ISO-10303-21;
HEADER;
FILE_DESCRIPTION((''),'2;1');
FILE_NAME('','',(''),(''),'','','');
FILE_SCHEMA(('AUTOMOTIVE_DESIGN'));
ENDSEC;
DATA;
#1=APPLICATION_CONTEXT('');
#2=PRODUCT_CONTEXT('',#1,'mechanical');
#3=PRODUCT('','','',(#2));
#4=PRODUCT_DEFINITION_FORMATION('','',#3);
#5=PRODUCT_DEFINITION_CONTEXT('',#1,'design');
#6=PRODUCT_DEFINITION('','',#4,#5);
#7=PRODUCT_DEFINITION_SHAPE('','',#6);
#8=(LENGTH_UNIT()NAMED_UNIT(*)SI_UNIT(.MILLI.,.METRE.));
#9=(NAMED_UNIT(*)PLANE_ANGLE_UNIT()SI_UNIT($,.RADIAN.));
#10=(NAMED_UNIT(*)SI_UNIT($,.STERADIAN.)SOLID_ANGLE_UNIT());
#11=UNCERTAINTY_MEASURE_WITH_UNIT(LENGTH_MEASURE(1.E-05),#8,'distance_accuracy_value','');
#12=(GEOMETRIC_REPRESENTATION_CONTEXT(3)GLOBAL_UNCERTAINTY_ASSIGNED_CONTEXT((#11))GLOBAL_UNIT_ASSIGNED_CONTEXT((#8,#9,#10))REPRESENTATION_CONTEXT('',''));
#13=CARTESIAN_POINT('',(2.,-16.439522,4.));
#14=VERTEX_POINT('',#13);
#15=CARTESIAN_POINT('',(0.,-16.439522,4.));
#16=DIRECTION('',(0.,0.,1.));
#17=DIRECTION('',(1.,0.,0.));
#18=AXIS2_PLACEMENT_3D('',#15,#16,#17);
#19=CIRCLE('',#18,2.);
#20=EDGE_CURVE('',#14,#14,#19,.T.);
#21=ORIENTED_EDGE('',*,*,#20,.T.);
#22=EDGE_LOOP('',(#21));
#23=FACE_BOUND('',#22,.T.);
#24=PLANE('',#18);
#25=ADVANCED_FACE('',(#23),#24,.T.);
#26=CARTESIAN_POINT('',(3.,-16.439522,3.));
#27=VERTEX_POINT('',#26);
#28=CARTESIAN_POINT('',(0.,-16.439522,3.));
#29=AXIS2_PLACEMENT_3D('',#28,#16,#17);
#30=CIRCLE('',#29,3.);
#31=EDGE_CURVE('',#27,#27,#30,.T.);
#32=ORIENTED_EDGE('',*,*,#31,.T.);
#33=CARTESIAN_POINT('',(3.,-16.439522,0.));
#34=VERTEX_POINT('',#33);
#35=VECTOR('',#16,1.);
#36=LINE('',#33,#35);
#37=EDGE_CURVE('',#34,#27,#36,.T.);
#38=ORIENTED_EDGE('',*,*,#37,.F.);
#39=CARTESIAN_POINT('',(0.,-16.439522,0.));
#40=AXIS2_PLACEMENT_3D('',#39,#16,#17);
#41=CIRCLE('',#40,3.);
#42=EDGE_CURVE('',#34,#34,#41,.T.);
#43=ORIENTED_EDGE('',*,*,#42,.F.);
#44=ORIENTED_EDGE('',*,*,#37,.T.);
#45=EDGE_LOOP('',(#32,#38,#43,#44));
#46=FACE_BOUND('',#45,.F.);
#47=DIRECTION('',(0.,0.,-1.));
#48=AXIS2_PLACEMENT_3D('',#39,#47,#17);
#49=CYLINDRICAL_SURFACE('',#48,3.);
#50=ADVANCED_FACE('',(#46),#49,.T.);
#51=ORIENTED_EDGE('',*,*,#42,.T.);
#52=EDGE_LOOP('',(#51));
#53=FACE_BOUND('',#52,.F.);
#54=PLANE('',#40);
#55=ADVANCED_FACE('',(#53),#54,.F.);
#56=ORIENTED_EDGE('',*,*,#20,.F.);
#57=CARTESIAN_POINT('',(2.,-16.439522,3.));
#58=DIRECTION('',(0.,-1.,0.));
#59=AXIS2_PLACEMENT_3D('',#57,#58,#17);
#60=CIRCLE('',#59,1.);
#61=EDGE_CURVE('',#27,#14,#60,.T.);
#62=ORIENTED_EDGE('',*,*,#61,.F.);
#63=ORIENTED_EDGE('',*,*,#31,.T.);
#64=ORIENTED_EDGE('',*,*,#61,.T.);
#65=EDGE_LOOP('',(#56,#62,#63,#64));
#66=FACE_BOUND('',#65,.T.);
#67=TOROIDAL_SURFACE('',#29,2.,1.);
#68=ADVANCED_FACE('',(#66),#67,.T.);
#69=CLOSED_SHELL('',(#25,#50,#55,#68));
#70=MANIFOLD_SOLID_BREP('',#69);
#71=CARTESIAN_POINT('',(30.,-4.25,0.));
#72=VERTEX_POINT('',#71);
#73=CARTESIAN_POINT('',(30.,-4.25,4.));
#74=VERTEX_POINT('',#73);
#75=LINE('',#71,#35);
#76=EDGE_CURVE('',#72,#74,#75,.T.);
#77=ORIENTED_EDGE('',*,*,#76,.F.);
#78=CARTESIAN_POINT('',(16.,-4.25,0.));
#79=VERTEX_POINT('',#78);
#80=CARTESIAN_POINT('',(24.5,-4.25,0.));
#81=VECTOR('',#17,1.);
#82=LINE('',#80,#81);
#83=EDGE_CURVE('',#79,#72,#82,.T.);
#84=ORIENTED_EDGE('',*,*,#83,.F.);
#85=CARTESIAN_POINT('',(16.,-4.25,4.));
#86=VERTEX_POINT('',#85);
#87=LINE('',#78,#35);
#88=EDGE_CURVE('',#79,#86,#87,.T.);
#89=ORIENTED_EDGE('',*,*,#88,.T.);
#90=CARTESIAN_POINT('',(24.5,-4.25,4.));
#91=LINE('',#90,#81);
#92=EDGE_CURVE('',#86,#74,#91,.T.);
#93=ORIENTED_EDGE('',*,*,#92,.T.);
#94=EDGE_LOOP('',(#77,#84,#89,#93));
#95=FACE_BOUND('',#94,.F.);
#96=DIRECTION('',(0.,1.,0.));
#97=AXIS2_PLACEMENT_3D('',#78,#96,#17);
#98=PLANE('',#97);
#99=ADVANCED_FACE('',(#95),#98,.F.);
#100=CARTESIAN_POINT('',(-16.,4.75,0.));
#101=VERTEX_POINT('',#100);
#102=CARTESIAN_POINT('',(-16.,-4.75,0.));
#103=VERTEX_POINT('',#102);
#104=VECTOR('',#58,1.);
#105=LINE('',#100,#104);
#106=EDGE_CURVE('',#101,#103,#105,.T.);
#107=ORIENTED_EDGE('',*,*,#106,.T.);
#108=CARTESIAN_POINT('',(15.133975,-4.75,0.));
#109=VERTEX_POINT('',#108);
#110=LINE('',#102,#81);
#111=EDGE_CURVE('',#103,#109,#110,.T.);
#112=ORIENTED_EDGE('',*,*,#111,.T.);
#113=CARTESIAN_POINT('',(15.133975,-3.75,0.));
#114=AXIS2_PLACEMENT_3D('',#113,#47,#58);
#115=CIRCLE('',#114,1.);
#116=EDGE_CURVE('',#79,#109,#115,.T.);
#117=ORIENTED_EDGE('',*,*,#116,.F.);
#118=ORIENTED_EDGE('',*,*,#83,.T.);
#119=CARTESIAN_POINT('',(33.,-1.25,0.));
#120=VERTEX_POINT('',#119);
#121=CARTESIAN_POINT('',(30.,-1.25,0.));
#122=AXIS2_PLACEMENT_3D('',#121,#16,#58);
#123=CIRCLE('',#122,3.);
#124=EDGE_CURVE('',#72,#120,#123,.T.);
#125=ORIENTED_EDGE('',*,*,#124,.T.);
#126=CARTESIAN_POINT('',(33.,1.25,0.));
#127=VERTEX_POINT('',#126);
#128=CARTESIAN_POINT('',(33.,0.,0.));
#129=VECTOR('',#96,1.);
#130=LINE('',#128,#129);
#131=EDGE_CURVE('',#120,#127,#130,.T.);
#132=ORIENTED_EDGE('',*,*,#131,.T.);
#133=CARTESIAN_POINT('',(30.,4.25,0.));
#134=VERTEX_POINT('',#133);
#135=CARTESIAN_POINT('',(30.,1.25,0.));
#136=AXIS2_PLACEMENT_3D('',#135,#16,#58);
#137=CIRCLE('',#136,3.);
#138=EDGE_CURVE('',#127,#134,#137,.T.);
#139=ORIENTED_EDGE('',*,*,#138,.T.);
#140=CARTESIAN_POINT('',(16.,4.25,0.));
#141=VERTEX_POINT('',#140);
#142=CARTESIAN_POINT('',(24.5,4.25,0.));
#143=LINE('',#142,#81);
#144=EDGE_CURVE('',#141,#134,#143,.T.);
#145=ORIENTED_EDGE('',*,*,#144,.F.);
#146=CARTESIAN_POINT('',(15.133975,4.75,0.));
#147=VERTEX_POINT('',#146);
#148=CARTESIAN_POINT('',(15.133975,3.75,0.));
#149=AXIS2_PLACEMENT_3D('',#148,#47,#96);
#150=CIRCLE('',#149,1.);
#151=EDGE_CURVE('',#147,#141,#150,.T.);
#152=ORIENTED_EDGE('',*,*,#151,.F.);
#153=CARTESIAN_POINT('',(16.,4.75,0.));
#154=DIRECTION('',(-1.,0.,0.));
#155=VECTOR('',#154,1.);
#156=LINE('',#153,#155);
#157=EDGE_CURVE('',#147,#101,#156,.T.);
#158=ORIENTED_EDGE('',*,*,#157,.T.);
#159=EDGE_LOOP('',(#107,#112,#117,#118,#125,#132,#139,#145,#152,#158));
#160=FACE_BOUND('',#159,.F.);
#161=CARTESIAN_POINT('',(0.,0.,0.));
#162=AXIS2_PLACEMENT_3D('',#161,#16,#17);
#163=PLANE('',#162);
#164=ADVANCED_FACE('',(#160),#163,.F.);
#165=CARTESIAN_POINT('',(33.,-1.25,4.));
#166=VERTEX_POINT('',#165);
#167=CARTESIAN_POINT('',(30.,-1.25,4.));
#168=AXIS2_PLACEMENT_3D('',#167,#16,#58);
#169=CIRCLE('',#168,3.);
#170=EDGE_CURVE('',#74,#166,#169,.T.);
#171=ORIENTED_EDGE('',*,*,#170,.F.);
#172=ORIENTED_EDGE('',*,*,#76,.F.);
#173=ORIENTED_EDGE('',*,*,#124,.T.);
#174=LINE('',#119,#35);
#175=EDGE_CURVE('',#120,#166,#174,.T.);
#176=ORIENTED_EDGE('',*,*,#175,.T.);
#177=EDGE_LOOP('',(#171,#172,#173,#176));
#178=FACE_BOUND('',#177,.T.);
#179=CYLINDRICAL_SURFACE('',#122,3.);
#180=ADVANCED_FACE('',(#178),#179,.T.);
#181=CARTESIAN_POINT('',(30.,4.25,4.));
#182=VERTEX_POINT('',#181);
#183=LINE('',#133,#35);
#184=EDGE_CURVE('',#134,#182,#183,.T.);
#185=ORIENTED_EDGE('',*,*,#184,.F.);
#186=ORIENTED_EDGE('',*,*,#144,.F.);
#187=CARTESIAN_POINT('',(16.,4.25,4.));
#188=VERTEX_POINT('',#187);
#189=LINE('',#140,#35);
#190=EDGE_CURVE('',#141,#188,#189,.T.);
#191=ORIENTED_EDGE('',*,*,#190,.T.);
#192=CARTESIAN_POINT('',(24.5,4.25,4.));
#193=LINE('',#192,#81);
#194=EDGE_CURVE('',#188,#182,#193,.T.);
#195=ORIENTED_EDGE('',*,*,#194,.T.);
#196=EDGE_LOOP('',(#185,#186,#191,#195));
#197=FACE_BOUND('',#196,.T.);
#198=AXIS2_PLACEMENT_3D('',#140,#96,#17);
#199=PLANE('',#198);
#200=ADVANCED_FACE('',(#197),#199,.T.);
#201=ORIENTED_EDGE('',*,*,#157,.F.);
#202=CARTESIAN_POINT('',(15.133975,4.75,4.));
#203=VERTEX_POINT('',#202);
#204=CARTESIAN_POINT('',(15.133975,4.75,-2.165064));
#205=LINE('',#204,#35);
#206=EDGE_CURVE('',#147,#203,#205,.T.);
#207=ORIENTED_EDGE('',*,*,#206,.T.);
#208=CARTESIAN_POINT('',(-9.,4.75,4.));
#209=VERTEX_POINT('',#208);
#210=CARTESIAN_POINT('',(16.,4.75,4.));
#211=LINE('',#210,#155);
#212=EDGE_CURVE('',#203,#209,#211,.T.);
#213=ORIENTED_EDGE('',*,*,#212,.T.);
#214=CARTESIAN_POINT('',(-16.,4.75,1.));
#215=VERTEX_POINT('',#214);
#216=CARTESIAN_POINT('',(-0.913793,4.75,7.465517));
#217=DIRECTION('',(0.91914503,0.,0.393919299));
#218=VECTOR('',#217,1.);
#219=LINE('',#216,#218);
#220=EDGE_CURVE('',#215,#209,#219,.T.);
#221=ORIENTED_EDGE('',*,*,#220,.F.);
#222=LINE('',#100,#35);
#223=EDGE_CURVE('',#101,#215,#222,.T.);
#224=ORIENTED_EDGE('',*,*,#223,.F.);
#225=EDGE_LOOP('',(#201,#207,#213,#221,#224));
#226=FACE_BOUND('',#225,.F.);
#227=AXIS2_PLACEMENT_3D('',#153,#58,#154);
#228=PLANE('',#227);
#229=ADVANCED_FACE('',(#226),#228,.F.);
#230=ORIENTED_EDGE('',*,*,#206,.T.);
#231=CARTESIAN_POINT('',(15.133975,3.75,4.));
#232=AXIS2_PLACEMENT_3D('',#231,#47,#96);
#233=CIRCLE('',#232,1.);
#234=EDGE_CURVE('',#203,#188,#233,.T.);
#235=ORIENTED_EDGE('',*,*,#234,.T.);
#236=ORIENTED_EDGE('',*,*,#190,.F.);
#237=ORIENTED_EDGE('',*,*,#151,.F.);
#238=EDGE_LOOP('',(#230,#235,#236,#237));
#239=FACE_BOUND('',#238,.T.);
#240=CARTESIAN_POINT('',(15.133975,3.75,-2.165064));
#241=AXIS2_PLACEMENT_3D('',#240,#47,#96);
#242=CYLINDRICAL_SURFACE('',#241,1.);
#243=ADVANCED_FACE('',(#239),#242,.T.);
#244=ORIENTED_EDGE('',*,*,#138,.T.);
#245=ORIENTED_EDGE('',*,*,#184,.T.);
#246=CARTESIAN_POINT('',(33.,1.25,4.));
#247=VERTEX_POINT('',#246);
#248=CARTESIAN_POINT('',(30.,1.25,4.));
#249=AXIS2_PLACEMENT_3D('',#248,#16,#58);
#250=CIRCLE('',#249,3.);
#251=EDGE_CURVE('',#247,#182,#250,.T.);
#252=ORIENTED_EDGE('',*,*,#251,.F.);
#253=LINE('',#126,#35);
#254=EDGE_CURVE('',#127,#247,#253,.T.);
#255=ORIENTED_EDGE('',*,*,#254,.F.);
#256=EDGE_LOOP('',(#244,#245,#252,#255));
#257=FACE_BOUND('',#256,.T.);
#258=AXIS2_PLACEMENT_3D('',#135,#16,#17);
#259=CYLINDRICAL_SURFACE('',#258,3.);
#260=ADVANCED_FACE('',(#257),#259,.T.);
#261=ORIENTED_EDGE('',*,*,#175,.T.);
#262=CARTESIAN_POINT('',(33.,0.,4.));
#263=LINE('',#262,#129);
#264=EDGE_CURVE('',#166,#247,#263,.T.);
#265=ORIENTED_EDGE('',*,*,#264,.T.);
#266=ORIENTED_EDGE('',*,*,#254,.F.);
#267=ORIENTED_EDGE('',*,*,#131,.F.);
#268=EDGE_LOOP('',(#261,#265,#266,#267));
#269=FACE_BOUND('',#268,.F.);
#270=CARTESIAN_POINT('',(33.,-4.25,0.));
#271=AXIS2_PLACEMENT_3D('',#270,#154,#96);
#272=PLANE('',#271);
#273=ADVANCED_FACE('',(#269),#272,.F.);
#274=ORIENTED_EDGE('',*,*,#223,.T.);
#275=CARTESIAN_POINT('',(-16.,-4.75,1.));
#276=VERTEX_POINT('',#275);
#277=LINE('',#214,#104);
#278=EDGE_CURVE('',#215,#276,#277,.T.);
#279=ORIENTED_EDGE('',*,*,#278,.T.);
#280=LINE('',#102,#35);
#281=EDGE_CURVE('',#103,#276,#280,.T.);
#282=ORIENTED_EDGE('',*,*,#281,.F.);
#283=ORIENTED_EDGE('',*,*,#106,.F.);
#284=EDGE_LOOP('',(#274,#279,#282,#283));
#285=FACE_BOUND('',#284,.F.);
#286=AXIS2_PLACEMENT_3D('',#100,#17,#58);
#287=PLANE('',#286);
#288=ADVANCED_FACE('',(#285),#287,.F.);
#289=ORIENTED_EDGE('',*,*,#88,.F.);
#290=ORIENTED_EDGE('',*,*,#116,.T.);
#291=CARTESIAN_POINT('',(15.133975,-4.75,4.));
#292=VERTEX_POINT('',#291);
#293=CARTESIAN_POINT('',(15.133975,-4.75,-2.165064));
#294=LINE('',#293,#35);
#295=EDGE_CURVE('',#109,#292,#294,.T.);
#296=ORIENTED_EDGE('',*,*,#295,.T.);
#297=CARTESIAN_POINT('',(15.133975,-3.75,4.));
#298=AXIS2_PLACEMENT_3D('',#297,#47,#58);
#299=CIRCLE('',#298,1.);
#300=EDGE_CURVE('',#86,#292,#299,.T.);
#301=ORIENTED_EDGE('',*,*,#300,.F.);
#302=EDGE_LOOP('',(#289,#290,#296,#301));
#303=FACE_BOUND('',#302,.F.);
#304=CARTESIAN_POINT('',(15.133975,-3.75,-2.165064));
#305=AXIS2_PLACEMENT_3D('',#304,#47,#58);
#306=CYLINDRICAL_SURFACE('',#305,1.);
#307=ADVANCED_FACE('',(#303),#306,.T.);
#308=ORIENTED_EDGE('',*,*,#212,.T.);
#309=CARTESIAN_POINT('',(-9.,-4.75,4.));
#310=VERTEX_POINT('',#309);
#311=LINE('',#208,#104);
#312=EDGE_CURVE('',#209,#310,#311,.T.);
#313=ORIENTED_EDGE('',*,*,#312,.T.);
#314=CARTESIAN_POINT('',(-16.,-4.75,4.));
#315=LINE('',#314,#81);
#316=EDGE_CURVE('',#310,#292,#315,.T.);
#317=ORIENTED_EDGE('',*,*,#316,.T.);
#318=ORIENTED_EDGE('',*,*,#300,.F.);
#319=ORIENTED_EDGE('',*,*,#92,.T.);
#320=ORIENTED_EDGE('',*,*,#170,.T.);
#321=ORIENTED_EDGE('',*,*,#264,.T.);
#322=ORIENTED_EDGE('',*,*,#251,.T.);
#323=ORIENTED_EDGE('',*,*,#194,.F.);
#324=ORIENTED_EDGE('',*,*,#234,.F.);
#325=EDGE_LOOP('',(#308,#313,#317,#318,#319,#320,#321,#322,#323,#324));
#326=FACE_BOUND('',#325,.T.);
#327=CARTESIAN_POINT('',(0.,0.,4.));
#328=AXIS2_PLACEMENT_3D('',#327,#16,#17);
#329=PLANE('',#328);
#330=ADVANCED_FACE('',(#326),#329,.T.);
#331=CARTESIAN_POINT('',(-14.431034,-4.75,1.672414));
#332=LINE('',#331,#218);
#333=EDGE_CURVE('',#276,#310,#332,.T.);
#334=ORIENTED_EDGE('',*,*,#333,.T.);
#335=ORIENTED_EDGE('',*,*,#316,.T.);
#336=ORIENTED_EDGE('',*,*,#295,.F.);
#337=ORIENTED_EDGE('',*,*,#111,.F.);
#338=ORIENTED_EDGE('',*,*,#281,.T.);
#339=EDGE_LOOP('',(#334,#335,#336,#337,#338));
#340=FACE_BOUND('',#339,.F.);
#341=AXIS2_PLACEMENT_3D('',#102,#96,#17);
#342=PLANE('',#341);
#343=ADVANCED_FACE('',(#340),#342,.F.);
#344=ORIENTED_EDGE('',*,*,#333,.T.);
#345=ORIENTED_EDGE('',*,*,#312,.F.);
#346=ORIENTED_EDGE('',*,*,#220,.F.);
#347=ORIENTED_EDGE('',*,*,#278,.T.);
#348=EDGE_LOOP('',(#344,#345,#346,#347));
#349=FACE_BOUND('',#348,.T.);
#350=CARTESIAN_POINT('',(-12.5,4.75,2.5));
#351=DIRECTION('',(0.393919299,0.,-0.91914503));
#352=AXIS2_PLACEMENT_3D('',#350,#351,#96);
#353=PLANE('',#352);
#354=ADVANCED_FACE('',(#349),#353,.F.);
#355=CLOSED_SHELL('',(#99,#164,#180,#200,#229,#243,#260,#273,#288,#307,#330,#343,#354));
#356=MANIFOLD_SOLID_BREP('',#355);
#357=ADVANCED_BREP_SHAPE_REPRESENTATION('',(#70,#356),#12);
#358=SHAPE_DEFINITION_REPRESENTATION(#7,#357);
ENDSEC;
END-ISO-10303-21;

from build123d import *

# Parameters (mm, degrees)
F0_W        = 17
F0_H        = 8.5
F1_DEPTH    = 4
F0_R        = 3
F2_R        = 3
F3_SIZE2    = 7
F3_SIZE     = 3
F4_T1_DEPTH = 8.3301270189


# Not quite as in the source:
# - a fillet or chamfer that OpenCascade refuses, or shapes differently, is made with other operations: its cross-section is extruded or revolved along the edge and cut away or added


with BuildPart() as f1:
    # F0 (on Top) → F1 (new body)
    with BuildSketch(Plane.XY):
        Polygon((-16, -4.75), (16, -4.75), (16, -4.25), (16, 4.25), (16, 4.75), (-16, 4.75), align=None)
        with Locations((24.5, 0)):
            Rectangle(F0_W, F0_H)
    extrude(amount=F1_DEPTH)

    # F2
    f2_edges = [f1.edges().sort_by_distance(p)[0] for p in [
        (33, -4.25, 2),
        (33, 4.25, 2),
    ]]
    fillet(f2_edges, radius=F2_R)

    # F3
    f3_edges = [f1.edges().sort_by_distance(p)[0] for p in [
        (-16, 0, 4),
    ]]
    f3_side = f1.faces().sort_by_distance((-16, 0, 2))[0]
    chamfer(f3_edges, length=F3_SIZE, length2=F3_SIZE2, reference=f3_side)

    # F4: fillet of radius 1 on 2 edges, made by hand

    # F4_s2 → F4_t1 (cut)
    with BuildSketch(Plane.XY.offset(-2.1650635095)):
        with BuildLine():
            ThreePointArc((15.1339745962, -4.75), (15.6339745962, -4.6160254038), (16, -4.25))
            Line((16, -4.25), (16, -4.75))
            Line((16, -4.75), (15.1339745962, -4.75))
        make_face()
        with BuildLine():
            ThreePointArc((15.1339745962, 4.75), (15.6339745962, 4.6160254038), (16, 4.25))
            Line((16, 4.25), (16, 4.75))
            Line((16, 4.75), (15.1339745962, 4.75))
        make_face()
    extrude(amount=F4_T1_DEPTH, mode=Mode.SUBTRACT)


with BuildPart() as f1b:
    # F0 (on Top) → F1, piece 2 (new body)
    with BuildSketch(Plane.XY):
        with Locations((0, -16.4395216852)):
            Circle(F0_R)
    extrude(amount=F1_DEPTH)

    # F4#2: fillet of radius 1 on 1 edges, made by hand

    # F4_2_s1 → F4_2_t2 (revolve, cut)
    with BuildSketch(Plane.XZ.offset(16.4395216852)):
        with BuildLine():
            ThreePointArc((3, 3), (2.7071067812, 3.7071067812), (2, 4))
            Line((2, 4), (3, 4))
            Line((3, 4), (3, 3))
        make_face()
    revolve(axis=Axis((0, -16.4395216852, 4), (0, 0, 1)), mode=Mode.SUBTRACT)


solid = Compound([f1.part, f1b.part])
